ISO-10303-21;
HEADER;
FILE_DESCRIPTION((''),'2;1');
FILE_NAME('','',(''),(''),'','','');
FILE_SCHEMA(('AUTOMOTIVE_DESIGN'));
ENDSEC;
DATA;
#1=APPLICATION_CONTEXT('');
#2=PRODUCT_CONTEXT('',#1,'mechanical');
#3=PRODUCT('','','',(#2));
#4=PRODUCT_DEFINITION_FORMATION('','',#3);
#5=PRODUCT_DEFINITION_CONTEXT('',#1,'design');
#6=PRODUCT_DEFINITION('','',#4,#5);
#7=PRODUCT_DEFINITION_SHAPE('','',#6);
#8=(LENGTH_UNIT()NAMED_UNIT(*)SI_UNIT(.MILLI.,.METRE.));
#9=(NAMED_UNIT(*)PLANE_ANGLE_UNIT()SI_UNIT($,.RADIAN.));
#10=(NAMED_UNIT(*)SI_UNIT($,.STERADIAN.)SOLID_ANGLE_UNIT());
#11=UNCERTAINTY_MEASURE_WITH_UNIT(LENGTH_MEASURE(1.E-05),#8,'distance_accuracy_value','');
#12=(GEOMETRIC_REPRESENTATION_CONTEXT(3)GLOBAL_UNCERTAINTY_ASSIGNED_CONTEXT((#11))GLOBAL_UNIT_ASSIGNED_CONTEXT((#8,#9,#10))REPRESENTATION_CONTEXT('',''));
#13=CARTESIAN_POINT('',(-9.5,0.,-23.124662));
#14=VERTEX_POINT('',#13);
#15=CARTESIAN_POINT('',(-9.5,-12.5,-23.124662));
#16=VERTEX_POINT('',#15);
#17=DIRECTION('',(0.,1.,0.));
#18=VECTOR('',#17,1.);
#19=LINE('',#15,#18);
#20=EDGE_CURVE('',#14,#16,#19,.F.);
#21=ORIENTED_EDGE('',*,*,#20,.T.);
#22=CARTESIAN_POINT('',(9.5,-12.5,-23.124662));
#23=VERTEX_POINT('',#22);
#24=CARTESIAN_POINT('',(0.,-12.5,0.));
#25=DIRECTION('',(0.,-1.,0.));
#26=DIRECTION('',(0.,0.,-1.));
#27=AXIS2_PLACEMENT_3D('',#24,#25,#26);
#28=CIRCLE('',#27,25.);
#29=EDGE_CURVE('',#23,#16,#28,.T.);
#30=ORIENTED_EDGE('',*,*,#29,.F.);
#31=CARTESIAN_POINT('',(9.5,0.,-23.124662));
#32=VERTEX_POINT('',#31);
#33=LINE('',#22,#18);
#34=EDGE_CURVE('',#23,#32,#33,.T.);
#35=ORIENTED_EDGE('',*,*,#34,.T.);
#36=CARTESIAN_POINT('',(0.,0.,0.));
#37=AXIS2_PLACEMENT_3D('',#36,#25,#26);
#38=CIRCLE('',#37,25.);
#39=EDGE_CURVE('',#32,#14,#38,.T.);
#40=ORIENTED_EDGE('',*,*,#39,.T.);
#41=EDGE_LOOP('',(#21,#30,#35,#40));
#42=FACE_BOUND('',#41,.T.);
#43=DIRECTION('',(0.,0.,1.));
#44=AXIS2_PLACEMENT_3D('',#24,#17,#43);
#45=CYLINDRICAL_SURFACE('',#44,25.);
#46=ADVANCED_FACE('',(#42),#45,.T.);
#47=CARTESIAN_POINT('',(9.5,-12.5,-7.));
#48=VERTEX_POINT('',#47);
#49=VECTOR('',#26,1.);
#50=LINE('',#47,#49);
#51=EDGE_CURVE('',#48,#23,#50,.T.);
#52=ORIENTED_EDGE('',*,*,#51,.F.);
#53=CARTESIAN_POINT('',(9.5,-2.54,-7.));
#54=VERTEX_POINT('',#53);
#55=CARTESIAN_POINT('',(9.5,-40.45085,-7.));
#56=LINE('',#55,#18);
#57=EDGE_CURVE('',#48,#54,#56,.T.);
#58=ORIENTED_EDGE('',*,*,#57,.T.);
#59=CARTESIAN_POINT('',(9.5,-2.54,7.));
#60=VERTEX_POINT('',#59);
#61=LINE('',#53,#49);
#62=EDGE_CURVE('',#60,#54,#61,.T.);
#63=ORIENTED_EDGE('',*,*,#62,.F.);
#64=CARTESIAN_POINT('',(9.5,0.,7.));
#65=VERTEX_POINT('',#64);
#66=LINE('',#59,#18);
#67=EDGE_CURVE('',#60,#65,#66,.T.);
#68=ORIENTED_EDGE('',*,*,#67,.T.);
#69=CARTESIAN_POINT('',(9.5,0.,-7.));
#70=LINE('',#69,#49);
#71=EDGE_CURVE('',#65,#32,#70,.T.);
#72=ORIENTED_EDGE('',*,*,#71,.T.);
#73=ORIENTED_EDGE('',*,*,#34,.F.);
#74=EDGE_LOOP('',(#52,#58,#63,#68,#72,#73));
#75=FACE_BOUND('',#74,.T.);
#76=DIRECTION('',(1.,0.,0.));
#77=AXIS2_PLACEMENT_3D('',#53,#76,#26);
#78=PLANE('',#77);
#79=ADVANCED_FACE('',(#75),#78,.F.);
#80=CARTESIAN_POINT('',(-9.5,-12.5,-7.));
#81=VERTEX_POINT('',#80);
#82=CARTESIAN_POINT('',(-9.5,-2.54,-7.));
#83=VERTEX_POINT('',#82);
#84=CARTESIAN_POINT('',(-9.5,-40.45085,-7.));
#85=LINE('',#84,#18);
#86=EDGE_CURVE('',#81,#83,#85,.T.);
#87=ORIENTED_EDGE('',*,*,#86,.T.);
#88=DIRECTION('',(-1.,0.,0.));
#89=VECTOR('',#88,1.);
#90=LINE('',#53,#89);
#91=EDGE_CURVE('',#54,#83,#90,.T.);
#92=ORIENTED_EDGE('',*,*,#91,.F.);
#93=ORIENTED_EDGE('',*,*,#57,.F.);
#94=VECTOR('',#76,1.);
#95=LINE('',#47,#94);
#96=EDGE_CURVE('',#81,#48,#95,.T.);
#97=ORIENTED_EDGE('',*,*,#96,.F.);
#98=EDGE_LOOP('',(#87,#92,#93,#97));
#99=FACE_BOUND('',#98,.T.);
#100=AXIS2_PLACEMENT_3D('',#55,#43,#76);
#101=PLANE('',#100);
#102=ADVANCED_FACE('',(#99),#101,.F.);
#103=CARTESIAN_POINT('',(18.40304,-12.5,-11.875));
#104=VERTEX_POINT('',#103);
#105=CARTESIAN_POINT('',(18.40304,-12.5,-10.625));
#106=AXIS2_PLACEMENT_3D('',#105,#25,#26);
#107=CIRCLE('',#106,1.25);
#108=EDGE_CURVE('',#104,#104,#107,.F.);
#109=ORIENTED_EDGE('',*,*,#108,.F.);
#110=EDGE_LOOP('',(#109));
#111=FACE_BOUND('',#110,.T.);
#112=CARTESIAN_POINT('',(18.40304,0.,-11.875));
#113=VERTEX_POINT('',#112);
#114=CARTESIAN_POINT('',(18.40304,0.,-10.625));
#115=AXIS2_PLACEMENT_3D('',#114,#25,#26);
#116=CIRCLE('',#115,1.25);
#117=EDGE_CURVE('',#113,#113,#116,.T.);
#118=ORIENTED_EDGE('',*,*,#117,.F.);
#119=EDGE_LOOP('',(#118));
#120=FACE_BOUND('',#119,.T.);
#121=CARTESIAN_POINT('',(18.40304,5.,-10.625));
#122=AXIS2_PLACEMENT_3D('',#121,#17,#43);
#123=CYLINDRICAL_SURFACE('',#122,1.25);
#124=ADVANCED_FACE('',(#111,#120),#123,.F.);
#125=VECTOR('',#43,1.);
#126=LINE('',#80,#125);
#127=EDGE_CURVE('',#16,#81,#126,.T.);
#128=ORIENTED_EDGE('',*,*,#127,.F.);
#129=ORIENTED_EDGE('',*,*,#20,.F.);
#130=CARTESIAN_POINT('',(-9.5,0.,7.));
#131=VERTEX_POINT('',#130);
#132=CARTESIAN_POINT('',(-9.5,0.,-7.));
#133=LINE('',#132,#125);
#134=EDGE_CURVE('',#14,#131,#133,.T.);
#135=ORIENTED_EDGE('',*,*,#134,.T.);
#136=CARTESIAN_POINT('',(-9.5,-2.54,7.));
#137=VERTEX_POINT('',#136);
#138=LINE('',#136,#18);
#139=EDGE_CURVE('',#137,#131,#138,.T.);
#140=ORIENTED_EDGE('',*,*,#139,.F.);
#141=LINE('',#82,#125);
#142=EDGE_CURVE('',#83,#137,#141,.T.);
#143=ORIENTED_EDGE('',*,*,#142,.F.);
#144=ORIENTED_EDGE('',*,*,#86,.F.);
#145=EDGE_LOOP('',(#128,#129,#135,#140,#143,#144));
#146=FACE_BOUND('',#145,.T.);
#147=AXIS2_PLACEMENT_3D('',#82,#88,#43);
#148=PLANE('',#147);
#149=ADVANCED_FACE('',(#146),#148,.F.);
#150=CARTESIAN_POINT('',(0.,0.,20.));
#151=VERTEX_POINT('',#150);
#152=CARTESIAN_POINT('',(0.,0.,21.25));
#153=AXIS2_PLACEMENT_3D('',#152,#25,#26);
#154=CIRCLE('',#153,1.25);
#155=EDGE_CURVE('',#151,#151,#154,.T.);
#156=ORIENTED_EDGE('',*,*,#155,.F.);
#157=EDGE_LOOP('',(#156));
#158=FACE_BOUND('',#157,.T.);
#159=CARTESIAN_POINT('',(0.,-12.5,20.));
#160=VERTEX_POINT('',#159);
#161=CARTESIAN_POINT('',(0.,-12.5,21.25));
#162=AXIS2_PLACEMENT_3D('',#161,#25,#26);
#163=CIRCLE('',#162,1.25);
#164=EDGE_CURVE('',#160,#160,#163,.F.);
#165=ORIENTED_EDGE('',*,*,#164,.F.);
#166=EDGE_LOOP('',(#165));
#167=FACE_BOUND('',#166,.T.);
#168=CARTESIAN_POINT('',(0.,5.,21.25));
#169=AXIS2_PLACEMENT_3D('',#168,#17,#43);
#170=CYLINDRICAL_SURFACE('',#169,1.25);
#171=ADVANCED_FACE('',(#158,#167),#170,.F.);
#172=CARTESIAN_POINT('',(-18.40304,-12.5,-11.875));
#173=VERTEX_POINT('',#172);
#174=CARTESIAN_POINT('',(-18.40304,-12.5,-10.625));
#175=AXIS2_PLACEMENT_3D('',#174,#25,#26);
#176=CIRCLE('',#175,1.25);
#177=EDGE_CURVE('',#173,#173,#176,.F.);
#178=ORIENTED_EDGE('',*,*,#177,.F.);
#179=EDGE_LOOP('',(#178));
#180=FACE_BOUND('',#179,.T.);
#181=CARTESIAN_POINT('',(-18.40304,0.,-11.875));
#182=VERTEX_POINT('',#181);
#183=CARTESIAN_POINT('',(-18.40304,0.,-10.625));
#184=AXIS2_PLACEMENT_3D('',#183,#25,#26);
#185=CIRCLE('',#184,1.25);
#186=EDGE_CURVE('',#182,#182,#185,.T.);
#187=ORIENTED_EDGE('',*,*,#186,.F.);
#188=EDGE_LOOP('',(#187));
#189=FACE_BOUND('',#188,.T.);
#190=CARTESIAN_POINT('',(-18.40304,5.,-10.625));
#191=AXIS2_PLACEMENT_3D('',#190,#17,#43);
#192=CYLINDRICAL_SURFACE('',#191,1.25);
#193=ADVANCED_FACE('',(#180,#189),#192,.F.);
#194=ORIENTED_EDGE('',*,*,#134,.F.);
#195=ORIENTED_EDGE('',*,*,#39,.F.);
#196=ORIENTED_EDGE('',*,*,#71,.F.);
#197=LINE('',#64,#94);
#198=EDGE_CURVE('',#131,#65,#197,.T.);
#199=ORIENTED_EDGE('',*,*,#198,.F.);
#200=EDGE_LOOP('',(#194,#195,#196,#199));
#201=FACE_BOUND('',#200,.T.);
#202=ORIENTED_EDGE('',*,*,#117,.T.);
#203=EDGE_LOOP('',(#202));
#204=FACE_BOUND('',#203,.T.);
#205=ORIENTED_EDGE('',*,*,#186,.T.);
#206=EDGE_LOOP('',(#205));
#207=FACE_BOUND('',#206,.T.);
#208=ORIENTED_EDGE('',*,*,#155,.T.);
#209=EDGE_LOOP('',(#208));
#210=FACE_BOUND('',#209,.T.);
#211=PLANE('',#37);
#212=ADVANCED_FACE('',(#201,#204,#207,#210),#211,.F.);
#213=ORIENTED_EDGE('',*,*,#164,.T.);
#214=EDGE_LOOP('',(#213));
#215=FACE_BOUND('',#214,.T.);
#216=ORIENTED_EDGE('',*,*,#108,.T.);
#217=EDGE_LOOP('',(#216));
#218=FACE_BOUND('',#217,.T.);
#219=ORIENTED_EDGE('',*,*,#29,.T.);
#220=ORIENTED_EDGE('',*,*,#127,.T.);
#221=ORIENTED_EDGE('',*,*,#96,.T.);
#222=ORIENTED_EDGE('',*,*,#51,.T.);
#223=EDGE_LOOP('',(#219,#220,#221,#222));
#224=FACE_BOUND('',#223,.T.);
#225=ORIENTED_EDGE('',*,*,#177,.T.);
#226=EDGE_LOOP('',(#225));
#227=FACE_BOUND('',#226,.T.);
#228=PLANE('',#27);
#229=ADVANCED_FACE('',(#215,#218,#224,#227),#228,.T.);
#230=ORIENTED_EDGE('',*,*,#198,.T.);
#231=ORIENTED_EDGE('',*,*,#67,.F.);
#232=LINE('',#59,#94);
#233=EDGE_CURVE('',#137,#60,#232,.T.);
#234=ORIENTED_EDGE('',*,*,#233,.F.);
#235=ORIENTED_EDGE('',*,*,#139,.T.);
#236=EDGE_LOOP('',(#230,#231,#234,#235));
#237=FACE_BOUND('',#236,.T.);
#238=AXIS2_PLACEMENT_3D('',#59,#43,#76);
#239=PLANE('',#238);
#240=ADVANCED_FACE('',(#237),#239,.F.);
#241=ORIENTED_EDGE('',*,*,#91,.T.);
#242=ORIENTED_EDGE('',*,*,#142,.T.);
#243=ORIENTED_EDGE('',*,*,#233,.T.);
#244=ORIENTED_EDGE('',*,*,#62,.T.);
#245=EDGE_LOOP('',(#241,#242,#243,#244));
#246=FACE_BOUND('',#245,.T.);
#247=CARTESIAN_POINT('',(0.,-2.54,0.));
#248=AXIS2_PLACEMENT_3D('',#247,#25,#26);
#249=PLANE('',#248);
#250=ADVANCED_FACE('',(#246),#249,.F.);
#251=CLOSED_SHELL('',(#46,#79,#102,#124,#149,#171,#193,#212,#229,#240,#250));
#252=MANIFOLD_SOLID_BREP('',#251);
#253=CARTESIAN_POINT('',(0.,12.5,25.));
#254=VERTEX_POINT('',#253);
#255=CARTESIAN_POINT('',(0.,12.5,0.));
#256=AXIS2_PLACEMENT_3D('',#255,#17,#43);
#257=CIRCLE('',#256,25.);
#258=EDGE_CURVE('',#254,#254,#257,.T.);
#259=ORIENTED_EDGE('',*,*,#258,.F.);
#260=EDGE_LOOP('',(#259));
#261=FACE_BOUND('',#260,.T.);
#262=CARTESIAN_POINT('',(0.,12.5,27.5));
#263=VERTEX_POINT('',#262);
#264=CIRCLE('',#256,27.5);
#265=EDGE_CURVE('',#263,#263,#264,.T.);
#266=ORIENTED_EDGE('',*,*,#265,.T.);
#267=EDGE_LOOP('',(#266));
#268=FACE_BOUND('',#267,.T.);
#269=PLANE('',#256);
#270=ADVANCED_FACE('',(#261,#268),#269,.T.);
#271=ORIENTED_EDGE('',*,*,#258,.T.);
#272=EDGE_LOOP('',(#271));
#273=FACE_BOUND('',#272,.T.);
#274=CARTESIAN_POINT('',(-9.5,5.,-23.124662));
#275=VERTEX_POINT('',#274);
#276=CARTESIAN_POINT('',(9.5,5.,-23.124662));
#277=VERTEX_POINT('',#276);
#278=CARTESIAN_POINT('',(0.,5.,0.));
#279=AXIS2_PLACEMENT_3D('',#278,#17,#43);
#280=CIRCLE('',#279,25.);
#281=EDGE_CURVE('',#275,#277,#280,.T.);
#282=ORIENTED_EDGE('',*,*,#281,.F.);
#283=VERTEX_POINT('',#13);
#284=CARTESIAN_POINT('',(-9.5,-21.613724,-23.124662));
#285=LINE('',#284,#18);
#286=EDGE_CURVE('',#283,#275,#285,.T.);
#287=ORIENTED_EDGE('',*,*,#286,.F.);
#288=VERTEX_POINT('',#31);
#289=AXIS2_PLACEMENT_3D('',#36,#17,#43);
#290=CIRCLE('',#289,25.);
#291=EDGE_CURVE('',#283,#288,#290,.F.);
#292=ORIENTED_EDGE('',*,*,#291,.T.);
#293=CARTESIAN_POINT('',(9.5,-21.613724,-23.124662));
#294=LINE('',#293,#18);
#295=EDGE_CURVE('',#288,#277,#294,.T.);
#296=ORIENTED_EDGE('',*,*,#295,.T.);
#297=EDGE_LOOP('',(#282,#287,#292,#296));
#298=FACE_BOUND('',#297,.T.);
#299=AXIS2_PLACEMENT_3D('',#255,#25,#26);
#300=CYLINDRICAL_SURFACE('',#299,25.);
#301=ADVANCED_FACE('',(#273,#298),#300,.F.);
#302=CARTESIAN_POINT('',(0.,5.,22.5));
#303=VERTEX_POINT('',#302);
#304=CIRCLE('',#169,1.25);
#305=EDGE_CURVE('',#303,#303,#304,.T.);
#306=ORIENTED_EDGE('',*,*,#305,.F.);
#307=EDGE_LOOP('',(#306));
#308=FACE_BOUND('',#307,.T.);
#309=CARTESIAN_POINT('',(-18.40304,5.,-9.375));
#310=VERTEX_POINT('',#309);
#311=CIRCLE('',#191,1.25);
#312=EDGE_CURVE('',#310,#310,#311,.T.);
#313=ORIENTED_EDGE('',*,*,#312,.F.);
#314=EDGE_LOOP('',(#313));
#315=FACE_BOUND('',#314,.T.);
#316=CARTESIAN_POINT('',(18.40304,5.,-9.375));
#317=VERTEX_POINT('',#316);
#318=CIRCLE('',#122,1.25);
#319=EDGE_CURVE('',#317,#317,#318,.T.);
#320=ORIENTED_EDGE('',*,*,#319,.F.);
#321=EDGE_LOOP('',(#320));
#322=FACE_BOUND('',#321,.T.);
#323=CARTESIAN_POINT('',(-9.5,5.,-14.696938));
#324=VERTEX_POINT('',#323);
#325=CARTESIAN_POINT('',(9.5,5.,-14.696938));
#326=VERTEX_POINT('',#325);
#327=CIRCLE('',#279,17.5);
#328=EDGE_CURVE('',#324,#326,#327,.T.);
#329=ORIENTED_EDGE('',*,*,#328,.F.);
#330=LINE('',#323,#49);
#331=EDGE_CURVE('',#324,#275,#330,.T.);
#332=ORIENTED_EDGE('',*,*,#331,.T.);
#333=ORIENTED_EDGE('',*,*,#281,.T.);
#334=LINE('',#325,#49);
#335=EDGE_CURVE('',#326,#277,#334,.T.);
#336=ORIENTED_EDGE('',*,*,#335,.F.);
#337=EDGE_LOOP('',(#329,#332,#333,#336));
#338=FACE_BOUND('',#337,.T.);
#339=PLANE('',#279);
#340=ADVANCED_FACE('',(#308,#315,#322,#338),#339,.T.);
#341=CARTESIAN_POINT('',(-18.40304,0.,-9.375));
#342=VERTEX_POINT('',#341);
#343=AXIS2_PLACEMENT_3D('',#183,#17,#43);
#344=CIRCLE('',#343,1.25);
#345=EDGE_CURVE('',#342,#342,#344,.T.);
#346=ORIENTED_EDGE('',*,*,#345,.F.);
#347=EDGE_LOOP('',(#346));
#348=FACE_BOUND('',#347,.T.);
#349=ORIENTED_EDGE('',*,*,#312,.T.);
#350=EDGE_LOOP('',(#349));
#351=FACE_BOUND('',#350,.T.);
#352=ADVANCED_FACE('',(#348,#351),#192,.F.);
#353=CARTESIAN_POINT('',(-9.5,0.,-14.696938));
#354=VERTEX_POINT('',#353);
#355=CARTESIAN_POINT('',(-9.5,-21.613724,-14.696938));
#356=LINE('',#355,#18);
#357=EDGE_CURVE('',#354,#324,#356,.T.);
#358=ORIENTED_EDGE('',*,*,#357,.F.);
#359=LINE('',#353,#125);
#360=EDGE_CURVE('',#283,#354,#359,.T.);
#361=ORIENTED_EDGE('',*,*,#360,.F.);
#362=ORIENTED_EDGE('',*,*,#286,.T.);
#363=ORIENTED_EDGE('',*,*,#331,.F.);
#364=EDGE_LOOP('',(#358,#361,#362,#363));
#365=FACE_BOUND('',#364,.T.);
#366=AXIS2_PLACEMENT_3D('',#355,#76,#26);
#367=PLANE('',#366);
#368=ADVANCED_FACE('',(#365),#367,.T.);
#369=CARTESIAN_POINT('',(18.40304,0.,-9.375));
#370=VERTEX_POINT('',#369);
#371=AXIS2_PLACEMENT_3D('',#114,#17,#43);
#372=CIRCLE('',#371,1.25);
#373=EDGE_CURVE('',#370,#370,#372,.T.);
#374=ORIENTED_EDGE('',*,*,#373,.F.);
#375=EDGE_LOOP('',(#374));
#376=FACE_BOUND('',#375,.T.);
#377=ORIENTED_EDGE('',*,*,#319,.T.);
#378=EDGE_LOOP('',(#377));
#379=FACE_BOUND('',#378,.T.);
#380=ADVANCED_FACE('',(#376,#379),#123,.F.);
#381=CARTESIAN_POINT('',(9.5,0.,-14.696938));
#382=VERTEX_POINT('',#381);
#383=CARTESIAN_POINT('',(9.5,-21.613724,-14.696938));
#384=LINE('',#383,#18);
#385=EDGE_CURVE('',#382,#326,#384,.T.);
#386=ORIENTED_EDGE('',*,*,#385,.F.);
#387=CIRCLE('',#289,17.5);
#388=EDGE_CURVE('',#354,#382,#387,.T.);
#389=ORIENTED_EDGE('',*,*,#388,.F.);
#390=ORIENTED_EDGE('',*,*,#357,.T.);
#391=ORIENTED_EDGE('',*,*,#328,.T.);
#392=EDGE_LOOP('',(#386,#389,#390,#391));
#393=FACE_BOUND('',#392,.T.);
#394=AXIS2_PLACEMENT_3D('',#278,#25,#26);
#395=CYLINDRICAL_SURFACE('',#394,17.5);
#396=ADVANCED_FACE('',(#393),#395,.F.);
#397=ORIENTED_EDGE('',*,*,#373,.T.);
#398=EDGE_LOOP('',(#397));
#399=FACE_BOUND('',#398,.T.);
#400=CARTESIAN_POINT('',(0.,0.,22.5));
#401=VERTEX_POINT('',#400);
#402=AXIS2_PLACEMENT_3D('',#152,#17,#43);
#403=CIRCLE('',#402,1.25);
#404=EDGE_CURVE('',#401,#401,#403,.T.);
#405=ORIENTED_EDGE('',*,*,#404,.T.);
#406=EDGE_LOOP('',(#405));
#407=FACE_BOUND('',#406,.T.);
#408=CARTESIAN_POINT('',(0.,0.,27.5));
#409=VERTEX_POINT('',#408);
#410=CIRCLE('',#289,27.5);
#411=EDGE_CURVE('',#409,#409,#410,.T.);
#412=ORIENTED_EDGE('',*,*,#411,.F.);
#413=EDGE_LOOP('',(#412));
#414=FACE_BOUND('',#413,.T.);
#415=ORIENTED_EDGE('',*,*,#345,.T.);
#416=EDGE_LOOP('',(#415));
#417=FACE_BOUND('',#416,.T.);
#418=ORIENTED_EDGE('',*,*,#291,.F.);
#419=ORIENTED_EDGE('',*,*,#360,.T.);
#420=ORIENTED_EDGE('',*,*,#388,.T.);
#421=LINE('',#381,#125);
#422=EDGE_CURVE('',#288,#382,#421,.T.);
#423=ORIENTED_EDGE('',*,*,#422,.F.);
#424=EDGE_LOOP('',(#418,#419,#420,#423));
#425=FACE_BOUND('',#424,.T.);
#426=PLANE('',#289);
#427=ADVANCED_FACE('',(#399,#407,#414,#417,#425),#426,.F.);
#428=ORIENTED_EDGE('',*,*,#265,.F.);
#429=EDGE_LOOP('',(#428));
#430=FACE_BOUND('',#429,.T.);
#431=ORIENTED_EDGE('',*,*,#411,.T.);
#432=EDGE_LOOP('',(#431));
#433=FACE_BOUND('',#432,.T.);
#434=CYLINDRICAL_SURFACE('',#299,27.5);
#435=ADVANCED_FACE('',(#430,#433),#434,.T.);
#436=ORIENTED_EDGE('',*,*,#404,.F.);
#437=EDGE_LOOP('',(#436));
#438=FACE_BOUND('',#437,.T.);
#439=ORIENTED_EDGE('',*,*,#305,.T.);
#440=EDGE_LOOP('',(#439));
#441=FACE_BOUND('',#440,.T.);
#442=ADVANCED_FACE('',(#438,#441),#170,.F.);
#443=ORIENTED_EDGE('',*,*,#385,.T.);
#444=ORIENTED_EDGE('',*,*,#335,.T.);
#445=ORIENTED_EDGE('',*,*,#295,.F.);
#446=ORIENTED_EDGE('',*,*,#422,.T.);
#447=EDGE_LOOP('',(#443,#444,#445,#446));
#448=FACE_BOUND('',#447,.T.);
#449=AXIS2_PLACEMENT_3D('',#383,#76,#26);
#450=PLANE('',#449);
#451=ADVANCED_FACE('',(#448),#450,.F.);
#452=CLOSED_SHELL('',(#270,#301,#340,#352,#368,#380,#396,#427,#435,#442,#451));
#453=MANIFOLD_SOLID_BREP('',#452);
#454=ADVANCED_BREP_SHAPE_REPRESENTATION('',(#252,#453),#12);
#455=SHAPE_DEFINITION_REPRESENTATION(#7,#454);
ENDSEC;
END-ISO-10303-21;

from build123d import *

# Parameters (mm, degrees)
SKETCH1_R                           = 27.5
SKETCH1_R_2                         = 25
BOSS_EXTRUDE1_DEPTH                 = 12.5
BOSS_EXTRUDE2_START                 = 12.5
SKETCH2_R                           = 25
BOSS_EXTRUDE2_DEPTH                 = 12.5
SKETCH3_R                           = 25
SKETCH3_R_2                         = 17.5
BOSS_EXTRUDE3_DEPTH                 = 5
SKETCH4_W                           = 19
SKETCH4_H                           = 14
CUT_EXTRUDE5_DEPTH                  = 2.54
CUT_EXTRUDE2_START                  = -12.5
CUT_EXTRUDE2_DEPTH                  = 12.5
CUT_EXTRUDE6_START                  = -5
CUT_EXTRUDE6_DEPTH                  = 5
TAP_START                           = -12.5
TAP_DRILL_FOR_M3X0_5_TAP1_OUTLINE_R = 1.25
TAP_DRILL_FOR_M3X0_5_TAP1_DEPTH     = 17.5


# Read off the part's stored shape, not the designer's step: Cut-Extrude2, Tap Drill for M3x0.5 Tap1
with BuildPart() as part:
    # Sketch1 → Boss-Extrude1 (new body)
    with BuildSketch(Plane(origin=(0, 0, 0), x_dir=(1, 0, 0), z_dir=(0, 1, 0))):
        with Locations(Location((0, 0, 0), (0, 0, 270))):
            Circle(SKETCH1_R)
        with Locations(Location((0, 0, 0), (0, 0, 270))):
            Circle(SKETCH1_R_2, mode=Mode.SUBTRACT)
    extrude(amount=BOSS_EXTRUDE1_DEPTH)

    # Sketch3 → Boss-Extrude3 (add)
    with BuildSketch(Plane(origin=(0, 0, 0), x_dir=(1, 0, 0), z_dir=(0, 1, 0))):
        with Locations(Location((0, 0, 0), (0, 0, 90))):
            Circle(SKETCH3_R)
        with Locations(Location((0, 0, 0), (0, 0, 270))):
            Circle(SKETCH3_R_2, mode=Mode.SUBTRACT)
    extrude(amount=BOSS_EXTRUDE3_DEPTH)

    # Sketch7 → Cut-Extrude6 (cut)
    with BuildSketch(Plane(origin=(0, 5, 0), x_dir=(1, 0, 0), z_dir=(0, 1, 0)).offset(CUT_EXTRUDE6_START)):
        with BuildLine():
            Line((9.5, 14.696938457), (9.5, 23.12466216))
            ThreePointArc((9.5, 23.12466216), (0, 25), (-9.5, 23.12466216))
            Line((-9.5, 23.12466216), (-9.5, 14.696938457))
            ThreePointArc((-9.5, 14.696938457), (0, 17.5), (9.5, 14.696938457))
        make_face()
    extrude(amount=CUT_EXTRUDE6_DEPTH, mode=Mode.SUBTRACT)


with BuildPart() as body_2:
    # Sketch2 → Boss-Extrude2 (new body)
    with BuildSketch(Plane.XZ.offset(BOSS_EXTRUDE2_START)):
        with Locations(Location((0, 0, 0), (0, 0, 270))):
            Circle(SKETCH2_R)
    extrude(amount=-BOSS_EXTRUDE2_DEPTH)

    # Sketch4 → Cut-Extrude5 (cut)
    with BuildSketch(Plane(origin=(0, 0, 0), x_dir=(1, 0, 0), z_dir=(0, 1, 0))):
        Rectangle(SKETCH4_W, SKETCH4_H)
    extrude(amount=-CUT_EXTRUDE5_DEPTH, mode=Mode.SUBTRACT)

    # Cut-Extrude2 outline → Cut-Extrude2 (cut)
    with BuildSketch(Plane(origin=(0, 0, 0), x_dir=(1, 0, 0), z_dir=(0, 1, 0)).offset(CUT_EXTRUDE2_START)):
        with BuildLine():
            ThreePointArc((9.5, 23.12466216), (0, 25), (-9.5, 23.12466216))
            Line((-9.5, 23.12466216), (-9.5, 7))
            Line((-9.5, 7), (9.5, 7))
            Line((9.5, 7), (9.5, 23.12466216))
        make_face()
    extrude(amount=CUT_EXTRUDE2_DEPTH, mode=Mode.SUBTRACT)


with BuildPart() as tap_drill_for_m3x0_5_tap1_tool:
    # Tap Drill for M3x0.5 Tap1 outline → Tap Drill for M3x0.5 Tap1 (new body)
    with BuildSketch(Plane(origin=(0, 0, 0), x_dir=(1, 0, 0), z_dir=(0, 1, 0)).offset(TAP_START)):
        with Locations((-18.40303983, 10.625)):
            Circle(TAP_DRILL_FOR_M3X0_5_TAP1_OUTLINE_R)
        with Locations((0, -21.25)):
            Circle(TAP_DRILL_FOR_M3X0_5_TAP1_OUTLINE_R)
        with Locations((18.40303983, 10.625)):
            Circle(TAP_DRILL_FOR_M3X0_5_TAP1_OUTLINE_R)
    extrude(amount=TAP_DRILL_FOR_M3X0_5_TAP1_DEPTH)


with BuildPart() as part_1:
    add(part.part)

    # Tap Drill for M3x0.5 Tap1: cut by tap_drill_for_m3x0_5_tap1_tool
    add(tap_drill_for_m3x0_5_tap1_tool.part, mode=Mode.SUBTRACT)


with BuildPart() as body_2_1:
    add(body_2.part)

    # Tap Drill for M3x0.5 Tap1: cut by tap_drill_for_m3x0_5_tap1_tool
    add(tap_drill_for_m3x0_5_tap1_tool.part, mode=Mode.SUBTRACT)


solid = Compound([part_1.part, body_2_1.part])
